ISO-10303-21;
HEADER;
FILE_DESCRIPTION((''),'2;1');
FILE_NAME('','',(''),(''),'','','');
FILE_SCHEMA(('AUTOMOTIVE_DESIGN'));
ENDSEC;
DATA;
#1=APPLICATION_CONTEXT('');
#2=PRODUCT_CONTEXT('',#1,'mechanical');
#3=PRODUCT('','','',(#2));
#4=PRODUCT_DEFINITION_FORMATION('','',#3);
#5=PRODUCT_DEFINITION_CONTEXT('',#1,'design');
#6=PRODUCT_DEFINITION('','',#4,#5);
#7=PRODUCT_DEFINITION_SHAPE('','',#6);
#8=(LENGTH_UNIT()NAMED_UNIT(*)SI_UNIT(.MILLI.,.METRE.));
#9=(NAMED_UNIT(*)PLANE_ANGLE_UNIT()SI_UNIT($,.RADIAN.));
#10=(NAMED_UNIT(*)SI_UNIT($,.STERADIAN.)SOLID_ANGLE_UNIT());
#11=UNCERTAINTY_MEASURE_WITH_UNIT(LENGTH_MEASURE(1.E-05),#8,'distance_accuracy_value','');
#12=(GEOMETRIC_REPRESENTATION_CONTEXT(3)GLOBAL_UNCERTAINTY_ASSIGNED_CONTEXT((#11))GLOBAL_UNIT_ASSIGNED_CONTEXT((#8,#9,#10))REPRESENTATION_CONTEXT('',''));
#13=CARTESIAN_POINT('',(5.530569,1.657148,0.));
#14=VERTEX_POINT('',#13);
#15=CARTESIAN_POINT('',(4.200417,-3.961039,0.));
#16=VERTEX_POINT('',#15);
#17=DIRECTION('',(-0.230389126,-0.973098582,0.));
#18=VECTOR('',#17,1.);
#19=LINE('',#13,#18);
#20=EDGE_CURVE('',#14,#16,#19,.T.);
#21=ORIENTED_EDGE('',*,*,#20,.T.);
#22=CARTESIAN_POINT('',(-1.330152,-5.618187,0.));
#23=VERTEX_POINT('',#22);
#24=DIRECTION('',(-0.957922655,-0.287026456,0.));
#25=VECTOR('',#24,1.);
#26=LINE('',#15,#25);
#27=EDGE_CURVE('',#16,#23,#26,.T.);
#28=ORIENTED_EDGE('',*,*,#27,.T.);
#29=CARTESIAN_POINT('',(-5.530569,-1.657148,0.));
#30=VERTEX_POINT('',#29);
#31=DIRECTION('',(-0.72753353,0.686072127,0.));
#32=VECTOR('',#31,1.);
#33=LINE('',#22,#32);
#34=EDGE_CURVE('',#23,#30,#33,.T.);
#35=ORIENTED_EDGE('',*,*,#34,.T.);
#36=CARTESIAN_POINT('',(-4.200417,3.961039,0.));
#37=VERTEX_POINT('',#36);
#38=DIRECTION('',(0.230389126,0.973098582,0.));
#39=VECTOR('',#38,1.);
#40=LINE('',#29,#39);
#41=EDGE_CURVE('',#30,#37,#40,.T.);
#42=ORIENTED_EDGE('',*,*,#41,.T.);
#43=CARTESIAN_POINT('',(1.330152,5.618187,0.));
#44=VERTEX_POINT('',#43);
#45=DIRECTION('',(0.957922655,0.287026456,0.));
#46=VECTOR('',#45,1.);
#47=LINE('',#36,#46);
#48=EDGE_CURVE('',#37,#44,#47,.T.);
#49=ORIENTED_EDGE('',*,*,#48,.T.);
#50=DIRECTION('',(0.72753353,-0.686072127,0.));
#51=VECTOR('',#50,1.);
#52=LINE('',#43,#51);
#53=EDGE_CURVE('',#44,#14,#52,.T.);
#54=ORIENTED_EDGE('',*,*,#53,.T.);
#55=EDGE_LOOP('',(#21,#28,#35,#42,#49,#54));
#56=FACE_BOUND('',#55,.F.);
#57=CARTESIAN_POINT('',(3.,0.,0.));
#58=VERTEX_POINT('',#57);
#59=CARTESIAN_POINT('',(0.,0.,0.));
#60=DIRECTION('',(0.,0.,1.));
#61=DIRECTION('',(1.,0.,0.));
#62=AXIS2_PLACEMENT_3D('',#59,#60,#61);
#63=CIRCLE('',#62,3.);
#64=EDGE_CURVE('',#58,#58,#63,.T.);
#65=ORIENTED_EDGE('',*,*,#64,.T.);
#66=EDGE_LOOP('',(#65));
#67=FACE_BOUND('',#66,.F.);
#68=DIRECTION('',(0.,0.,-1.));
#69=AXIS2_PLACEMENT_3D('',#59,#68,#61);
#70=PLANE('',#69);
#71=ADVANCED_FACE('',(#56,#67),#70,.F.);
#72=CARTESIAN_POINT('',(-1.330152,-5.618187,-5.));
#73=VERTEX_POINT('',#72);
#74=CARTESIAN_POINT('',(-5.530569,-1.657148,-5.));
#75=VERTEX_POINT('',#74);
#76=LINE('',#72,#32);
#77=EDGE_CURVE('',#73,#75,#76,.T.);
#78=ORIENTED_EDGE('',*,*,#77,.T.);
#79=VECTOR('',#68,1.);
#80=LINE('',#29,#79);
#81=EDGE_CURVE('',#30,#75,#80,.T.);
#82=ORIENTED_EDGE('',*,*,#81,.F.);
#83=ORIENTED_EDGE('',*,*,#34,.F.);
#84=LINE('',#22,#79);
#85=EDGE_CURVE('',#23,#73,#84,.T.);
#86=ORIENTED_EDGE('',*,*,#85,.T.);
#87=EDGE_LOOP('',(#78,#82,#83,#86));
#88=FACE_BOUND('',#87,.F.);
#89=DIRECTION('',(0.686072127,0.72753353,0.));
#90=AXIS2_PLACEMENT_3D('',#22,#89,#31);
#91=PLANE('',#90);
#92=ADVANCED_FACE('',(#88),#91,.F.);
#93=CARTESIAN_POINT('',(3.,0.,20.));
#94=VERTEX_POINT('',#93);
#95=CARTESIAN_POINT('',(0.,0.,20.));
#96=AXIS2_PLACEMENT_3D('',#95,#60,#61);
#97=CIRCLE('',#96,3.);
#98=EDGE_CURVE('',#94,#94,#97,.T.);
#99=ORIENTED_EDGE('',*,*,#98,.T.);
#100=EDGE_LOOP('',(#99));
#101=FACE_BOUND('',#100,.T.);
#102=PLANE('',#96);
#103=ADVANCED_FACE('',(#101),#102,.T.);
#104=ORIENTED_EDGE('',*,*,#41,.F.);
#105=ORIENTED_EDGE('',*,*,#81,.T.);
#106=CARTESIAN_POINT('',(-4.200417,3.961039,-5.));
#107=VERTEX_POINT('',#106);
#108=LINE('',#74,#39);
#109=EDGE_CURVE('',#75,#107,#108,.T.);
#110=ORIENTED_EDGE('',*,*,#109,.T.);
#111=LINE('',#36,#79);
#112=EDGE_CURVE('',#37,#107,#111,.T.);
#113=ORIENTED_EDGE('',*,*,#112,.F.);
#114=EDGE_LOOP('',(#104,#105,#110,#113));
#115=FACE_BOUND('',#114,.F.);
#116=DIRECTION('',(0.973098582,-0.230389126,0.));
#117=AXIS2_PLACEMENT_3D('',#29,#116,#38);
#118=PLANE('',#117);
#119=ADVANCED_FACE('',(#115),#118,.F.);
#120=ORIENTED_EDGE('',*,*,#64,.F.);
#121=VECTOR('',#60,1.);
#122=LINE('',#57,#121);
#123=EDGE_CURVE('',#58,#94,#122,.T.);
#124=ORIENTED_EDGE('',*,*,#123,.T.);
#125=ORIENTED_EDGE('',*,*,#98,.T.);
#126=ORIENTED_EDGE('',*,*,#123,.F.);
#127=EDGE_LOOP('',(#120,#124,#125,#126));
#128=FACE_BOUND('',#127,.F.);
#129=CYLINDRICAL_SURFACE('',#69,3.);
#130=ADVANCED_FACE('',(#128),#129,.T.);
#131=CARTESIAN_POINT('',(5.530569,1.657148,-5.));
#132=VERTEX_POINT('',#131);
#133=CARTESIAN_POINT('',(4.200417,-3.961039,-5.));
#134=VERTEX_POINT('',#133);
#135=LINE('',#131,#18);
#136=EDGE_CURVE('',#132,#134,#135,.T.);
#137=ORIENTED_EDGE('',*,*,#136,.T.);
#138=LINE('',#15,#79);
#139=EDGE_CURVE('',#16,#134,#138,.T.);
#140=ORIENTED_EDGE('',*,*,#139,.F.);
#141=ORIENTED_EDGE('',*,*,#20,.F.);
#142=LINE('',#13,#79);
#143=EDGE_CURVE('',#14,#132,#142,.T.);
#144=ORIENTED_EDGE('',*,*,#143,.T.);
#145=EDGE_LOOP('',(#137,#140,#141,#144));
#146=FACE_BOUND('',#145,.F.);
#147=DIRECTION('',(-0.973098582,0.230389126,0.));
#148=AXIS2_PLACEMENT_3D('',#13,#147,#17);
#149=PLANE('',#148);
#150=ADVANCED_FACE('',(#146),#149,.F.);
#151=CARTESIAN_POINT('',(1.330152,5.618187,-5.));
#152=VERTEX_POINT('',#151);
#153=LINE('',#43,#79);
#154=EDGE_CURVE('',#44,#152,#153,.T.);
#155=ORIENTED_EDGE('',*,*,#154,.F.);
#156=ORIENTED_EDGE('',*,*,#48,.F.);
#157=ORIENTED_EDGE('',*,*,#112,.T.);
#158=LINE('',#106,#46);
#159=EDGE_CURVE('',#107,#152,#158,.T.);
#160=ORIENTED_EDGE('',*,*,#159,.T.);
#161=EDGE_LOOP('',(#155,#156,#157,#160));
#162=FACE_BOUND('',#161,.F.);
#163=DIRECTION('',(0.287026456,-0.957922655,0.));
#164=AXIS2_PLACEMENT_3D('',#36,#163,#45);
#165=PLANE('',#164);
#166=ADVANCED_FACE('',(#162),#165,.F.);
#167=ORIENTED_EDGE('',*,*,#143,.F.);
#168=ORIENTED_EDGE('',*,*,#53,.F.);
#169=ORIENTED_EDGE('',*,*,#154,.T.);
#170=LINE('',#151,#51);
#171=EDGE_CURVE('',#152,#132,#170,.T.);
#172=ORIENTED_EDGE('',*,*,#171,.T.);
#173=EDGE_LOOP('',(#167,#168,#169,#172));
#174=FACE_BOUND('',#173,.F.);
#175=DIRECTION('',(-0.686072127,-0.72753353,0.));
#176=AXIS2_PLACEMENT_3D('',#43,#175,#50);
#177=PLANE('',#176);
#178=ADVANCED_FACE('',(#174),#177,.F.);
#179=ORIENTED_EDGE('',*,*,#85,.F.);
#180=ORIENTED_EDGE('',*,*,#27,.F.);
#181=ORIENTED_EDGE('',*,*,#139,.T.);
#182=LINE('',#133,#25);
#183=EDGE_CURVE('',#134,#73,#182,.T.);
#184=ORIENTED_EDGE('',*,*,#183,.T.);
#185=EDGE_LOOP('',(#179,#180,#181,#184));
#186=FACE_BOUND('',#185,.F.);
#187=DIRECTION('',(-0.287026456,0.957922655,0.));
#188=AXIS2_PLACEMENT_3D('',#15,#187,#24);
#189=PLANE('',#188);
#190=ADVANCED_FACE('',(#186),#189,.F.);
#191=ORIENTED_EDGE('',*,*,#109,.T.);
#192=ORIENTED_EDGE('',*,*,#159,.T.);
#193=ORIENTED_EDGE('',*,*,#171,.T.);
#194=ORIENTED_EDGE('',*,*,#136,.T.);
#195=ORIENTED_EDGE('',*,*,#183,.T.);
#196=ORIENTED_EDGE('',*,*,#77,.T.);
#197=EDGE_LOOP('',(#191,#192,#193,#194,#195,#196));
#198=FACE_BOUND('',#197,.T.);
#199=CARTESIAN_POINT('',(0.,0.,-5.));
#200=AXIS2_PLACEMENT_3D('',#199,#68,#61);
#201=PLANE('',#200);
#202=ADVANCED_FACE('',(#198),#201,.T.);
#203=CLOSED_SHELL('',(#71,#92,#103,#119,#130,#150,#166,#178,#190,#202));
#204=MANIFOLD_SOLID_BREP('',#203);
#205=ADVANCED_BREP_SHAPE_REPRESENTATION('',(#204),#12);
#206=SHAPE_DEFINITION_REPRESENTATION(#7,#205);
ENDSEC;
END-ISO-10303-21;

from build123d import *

# Parameters (mm, degrees)
F0_R     = 3
F1_DEPTH = 20
F2_R     = 3
F3_DEPTH = 5


with BuildPart() as f1:
    # F0 (on Top) → F1 (new body)
    with BuildSketch(Plane.XY):
        Circle(F0_R)
    extrude(amount=F1_DEPTH)

    # F2 (on face) → F3 (join)
    with BuildSketch(Plane(origin=(0, 0, 0), x_dir=(1, 0, 0), z_dir=(0, 0, -1))):
        Polygon((1.3301522364, -5.6181872843), (5.5305690296, -1.6571480145), (4.2004167932, 3.9610392698), (-1.3301522364, 5.6181872843), (-5.5305690296, 1.6571480145), (-4.2004167932, -3.9610392698), align=None)
        Circle(F2_R, mode=Mode.SUBTRACT)
        Circle(F2_R)
    extrude(amount=F3_DEPTH)


solid = f1.part
